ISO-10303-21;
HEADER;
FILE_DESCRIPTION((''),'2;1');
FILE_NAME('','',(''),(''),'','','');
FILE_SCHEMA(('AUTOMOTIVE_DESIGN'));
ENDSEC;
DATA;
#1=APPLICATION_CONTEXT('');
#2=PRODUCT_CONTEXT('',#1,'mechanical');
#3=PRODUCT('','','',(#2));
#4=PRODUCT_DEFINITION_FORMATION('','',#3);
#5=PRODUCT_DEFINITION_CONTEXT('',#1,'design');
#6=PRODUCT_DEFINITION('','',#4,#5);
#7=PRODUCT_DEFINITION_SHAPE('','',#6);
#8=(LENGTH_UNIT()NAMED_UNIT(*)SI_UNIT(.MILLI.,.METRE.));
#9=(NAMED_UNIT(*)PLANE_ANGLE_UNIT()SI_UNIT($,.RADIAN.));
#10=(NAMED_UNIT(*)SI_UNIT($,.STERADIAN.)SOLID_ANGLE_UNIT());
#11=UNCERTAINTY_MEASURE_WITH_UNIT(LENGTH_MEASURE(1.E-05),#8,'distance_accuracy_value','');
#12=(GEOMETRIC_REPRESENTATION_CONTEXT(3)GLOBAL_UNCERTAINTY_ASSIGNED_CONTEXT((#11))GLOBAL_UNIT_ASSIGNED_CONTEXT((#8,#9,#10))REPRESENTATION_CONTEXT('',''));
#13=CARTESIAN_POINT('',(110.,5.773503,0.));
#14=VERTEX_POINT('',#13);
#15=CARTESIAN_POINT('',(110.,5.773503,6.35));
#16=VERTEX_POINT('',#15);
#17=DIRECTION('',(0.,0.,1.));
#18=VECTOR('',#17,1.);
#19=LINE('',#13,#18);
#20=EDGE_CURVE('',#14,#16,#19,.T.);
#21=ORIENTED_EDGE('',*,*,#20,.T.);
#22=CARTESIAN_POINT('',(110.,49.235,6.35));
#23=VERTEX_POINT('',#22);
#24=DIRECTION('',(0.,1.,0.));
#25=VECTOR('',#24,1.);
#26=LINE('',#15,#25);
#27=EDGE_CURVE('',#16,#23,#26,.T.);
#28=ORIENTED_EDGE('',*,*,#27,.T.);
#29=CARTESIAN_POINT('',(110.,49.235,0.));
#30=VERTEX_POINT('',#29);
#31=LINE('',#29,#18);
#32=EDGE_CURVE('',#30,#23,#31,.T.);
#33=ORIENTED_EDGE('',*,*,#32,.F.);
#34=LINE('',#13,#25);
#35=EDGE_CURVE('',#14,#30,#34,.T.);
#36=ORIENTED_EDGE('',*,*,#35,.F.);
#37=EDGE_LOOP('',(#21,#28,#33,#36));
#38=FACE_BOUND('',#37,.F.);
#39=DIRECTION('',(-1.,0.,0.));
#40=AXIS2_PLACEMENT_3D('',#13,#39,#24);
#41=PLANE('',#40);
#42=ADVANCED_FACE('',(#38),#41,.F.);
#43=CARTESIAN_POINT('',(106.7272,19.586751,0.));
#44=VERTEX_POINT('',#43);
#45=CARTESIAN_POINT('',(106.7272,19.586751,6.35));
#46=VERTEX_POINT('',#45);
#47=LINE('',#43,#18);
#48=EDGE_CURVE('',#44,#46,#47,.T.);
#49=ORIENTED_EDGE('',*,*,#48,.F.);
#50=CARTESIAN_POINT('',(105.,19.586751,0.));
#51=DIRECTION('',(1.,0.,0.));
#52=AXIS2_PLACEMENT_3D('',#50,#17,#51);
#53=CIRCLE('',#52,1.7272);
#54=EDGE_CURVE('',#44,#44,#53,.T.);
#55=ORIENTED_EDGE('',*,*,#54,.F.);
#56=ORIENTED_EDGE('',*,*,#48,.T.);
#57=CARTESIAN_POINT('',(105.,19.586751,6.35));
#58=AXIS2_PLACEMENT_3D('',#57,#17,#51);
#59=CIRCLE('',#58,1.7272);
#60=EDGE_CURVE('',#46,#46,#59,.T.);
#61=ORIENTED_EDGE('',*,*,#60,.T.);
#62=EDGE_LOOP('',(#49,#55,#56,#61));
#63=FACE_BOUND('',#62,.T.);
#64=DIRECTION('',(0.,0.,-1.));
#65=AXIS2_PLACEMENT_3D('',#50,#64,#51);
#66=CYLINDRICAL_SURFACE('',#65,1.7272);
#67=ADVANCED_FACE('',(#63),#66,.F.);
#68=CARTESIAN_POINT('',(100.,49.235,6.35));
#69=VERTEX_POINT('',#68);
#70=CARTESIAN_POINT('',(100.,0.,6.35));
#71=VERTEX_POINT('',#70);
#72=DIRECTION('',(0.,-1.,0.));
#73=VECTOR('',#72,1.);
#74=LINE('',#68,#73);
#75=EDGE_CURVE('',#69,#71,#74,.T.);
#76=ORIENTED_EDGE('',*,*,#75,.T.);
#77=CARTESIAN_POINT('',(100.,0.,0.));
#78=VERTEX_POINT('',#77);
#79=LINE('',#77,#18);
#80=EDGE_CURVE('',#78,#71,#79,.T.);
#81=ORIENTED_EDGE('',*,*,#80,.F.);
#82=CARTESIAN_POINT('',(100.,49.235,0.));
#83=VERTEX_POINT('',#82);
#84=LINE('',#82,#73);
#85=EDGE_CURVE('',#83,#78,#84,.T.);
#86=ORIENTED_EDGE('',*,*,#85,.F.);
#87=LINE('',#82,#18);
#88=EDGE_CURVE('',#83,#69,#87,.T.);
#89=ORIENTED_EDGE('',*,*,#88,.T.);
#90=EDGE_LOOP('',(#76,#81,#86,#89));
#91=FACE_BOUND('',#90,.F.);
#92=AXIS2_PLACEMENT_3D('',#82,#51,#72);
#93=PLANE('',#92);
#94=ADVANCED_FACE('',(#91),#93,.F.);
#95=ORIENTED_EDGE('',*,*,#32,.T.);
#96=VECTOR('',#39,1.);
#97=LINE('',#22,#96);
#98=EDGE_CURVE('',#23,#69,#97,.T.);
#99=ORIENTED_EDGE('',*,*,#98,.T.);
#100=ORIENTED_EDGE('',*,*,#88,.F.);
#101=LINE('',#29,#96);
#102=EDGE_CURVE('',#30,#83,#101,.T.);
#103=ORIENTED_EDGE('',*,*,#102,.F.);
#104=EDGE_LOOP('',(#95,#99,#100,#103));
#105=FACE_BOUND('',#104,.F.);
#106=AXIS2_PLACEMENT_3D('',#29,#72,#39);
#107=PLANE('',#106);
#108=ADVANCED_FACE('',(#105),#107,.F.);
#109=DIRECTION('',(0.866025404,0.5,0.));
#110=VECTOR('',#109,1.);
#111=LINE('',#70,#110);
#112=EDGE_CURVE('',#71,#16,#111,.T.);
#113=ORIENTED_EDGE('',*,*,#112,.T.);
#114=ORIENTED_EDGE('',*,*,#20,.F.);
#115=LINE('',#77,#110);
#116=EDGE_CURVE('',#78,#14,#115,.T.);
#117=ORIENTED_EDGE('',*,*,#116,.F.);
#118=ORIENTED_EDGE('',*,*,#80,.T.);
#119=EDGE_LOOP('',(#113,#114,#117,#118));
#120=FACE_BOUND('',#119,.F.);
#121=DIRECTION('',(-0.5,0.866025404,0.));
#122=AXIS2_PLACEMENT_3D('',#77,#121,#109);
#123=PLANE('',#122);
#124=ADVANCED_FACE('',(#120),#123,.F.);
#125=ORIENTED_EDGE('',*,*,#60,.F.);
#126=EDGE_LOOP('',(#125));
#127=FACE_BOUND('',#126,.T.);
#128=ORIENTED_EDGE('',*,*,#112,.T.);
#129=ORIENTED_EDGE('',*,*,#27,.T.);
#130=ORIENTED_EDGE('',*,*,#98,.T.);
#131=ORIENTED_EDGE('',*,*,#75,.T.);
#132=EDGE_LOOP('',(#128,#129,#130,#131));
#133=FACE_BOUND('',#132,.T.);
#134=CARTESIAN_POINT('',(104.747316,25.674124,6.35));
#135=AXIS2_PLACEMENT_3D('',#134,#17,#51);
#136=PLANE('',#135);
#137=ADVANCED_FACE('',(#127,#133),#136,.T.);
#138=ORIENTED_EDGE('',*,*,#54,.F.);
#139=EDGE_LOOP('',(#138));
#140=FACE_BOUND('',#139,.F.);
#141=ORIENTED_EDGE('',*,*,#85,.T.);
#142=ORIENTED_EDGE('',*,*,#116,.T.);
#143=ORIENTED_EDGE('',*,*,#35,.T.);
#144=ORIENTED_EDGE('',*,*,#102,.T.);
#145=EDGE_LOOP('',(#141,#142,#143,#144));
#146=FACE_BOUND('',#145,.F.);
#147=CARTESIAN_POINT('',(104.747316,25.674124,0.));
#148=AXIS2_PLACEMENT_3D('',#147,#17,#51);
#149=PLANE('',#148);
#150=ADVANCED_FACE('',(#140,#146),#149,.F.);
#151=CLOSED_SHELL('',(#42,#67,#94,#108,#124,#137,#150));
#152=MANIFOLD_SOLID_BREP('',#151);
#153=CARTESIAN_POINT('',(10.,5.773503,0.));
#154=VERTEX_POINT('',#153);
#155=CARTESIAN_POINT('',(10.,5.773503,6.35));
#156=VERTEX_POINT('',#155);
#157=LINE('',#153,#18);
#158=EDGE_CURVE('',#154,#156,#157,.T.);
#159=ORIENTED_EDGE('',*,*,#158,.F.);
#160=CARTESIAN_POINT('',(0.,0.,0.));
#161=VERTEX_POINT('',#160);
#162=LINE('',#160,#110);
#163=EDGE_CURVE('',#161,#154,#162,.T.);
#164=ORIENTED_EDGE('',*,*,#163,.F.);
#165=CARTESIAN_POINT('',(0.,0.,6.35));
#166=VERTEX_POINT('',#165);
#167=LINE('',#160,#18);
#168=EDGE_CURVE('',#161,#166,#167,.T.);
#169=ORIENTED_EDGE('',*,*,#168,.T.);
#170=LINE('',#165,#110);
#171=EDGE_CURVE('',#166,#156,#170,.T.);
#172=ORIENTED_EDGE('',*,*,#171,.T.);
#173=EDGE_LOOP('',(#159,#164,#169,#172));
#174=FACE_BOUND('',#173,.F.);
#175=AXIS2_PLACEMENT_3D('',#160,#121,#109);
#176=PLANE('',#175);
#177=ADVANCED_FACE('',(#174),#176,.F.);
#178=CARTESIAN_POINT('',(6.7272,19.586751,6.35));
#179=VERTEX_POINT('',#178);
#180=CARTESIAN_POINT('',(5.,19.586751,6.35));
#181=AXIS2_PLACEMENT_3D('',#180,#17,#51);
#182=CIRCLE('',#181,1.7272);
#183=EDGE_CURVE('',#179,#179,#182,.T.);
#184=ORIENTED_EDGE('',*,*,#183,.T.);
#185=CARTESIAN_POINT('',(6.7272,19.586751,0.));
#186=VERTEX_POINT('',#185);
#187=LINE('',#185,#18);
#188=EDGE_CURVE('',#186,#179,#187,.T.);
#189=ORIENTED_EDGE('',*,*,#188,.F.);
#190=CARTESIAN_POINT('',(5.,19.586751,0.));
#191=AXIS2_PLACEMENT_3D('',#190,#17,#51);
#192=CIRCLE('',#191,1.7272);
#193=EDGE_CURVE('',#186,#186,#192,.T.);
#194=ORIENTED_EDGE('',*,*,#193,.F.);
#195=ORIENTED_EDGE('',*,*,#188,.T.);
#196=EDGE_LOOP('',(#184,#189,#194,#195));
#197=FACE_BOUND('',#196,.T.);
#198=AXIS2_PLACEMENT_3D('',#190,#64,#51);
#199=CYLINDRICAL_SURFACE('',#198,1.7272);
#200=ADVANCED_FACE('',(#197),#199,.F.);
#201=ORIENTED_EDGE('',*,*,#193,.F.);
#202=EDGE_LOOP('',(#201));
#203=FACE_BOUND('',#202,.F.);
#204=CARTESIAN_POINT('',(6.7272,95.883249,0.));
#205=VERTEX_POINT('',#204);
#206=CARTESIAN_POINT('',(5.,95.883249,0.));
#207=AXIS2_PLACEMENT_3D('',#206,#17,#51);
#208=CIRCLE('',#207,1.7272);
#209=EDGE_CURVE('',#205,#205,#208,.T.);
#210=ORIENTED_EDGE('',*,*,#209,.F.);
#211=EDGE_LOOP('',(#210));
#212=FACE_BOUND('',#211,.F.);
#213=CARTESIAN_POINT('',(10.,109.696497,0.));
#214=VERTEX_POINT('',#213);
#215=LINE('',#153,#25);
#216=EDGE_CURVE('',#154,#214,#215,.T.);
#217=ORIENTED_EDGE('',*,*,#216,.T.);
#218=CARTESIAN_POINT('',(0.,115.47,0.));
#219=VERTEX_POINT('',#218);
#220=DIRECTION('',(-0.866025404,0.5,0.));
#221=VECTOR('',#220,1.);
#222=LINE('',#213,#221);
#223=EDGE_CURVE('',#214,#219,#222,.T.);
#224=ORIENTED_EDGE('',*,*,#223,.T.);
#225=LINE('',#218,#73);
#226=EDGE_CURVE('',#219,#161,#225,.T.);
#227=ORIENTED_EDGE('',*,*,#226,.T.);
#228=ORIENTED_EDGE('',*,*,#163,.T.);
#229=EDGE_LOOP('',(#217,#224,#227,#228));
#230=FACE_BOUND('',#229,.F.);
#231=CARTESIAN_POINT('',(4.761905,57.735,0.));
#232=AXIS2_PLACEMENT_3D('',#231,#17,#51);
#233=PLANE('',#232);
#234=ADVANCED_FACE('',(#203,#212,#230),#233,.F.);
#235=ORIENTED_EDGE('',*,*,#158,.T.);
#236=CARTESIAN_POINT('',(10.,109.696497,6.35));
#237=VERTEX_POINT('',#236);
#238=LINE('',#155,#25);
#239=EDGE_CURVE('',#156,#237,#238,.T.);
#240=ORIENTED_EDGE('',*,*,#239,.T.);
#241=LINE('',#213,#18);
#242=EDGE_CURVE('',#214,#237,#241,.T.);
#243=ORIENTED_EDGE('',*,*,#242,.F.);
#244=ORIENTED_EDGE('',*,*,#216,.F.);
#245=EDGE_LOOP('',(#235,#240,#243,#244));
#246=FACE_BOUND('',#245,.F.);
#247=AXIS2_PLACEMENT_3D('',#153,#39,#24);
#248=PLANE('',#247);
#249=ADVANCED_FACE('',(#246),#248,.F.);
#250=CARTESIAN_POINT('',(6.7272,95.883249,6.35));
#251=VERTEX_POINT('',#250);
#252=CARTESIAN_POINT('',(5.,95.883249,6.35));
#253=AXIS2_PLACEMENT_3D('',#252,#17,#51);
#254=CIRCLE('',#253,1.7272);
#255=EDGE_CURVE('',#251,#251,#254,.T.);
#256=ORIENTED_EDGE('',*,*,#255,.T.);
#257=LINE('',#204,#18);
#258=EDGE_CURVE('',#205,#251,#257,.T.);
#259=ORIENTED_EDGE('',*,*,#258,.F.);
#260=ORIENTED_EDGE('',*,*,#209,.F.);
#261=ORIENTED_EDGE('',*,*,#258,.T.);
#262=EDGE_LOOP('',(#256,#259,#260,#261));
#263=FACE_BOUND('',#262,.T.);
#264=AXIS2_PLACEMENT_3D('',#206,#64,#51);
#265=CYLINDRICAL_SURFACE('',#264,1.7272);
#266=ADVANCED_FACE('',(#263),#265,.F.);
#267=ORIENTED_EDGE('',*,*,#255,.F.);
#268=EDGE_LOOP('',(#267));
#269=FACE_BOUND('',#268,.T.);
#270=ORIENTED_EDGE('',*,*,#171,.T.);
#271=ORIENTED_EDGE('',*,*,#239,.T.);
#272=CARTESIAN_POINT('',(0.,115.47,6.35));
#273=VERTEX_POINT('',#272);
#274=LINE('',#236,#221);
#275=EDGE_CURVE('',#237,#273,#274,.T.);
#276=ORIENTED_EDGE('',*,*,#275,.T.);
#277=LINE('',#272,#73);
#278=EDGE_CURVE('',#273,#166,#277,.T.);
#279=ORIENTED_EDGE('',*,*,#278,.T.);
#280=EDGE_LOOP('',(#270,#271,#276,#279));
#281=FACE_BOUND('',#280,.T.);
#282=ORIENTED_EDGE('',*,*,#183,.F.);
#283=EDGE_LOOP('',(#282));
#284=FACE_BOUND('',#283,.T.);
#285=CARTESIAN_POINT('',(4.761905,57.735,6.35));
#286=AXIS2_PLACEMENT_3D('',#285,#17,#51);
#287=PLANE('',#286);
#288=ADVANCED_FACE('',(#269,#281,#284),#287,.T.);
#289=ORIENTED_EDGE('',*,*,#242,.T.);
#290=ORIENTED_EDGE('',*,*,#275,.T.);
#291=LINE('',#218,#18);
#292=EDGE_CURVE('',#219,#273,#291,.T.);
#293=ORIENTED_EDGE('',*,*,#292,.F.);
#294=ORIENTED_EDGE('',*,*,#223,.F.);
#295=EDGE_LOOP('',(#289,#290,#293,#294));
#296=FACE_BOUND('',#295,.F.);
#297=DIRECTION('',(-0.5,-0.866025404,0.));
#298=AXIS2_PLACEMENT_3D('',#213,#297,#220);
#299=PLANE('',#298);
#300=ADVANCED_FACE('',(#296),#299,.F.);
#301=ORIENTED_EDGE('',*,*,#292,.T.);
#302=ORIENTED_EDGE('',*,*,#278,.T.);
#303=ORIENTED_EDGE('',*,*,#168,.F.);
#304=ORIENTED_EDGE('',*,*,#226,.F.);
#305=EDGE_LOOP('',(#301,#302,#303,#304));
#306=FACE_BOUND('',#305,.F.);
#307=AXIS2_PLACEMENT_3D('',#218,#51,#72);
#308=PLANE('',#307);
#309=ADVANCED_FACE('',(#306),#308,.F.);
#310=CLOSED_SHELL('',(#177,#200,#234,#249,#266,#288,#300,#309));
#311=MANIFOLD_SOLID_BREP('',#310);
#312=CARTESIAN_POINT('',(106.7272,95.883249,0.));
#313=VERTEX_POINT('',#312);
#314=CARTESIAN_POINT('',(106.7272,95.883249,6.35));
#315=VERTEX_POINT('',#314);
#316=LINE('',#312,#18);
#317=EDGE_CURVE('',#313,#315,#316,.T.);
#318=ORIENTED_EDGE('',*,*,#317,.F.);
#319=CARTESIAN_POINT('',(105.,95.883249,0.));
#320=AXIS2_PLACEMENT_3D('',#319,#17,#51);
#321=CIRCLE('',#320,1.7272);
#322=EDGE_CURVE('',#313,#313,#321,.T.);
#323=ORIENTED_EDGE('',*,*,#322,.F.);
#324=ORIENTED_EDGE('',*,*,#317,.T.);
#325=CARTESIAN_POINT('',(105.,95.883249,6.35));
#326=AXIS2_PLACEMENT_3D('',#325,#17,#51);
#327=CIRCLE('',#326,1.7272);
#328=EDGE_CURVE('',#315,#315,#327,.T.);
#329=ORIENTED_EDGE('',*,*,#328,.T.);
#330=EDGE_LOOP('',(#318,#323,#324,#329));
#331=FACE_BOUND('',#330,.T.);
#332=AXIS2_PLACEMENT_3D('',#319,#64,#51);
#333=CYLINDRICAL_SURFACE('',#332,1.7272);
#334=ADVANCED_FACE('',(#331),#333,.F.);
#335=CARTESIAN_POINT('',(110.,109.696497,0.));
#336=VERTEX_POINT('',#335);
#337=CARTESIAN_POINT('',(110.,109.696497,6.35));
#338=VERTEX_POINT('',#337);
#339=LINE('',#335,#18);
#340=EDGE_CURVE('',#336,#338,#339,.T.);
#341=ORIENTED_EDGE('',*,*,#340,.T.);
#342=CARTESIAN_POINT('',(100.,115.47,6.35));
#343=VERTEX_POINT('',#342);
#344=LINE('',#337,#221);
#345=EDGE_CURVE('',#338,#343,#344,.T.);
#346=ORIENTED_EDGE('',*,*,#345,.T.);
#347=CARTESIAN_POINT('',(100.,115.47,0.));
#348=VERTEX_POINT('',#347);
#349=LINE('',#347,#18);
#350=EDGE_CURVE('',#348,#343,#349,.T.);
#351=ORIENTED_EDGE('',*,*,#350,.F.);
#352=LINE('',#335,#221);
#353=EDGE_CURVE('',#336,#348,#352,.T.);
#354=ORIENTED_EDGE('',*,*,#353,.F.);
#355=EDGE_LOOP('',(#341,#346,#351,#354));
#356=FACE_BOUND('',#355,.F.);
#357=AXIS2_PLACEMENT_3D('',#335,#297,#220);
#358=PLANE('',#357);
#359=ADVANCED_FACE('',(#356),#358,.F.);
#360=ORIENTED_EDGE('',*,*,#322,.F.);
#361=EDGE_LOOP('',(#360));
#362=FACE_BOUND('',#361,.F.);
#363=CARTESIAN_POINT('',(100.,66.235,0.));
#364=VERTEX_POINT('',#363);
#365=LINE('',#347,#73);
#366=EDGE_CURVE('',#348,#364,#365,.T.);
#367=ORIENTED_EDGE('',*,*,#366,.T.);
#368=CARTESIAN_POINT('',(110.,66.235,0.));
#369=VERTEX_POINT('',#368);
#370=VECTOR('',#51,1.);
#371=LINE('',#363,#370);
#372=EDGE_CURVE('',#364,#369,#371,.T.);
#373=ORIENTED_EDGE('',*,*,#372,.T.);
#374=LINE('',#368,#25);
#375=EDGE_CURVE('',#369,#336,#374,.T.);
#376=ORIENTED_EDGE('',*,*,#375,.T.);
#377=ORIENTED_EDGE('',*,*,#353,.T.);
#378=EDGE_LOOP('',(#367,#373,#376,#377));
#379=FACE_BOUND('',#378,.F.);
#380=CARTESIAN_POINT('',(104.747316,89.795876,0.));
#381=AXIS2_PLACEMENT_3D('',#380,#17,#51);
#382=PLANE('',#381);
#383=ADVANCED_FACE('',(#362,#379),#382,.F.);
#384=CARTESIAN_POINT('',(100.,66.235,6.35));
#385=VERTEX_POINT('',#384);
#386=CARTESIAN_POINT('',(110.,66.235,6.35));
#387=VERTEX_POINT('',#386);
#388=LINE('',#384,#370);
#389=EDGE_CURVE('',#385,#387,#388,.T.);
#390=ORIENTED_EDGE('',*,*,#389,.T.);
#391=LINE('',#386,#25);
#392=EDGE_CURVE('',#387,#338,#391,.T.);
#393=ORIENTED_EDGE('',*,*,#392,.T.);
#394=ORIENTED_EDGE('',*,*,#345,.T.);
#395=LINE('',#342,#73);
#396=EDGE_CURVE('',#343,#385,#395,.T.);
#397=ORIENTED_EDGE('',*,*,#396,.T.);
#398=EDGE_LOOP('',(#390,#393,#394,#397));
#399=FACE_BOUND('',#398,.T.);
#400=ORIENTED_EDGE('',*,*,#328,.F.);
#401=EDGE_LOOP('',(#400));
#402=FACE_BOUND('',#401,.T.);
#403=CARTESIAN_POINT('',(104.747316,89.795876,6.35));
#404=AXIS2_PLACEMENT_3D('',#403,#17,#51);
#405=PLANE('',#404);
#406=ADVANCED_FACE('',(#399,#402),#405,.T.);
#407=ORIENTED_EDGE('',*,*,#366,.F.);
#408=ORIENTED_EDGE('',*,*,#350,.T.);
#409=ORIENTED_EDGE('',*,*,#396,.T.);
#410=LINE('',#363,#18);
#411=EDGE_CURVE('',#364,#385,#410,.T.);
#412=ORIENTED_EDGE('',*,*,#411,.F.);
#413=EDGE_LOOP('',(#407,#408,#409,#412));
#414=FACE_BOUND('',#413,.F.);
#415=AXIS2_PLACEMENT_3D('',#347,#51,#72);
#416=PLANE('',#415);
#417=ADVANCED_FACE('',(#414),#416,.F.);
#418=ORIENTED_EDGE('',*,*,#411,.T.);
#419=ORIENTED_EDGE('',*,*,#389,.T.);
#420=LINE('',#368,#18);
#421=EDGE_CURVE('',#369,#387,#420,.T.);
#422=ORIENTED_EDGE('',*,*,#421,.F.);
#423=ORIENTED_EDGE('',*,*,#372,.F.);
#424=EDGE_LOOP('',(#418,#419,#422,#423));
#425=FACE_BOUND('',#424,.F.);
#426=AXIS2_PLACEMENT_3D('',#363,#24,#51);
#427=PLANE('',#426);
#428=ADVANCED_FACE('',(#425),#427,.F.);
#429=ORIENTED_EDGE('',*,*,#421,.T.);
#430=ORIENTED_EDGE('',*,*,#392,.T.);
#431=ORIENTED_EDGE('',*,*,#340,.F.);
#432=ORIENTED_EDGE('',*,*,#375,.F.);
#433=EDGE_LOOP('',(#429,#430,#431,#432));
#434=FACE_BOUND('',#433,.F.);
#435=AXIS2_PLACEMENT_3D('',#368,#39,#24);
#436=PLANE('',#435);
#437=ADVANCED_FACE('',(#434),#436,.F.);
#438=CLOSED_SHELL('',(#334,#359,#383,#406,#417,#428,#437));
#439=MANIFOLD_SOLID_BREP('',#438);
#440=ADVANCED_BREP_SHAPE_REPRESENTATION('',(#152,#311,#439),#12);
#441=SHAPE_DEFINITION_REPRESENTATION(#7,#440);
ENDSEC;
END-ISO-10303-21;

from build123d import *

# Parameters (mm, degrees)
F0_R     = 1.7272
F1_DEPTH = 6.35


# Not quite as in the source:
# - a length typed as a fraction of an inch, garbled in the dataset ("3 / 203.2 mm" for 3/8 in), is restored


with BuildPart() as f1:
    # F0 (on Top) → F1 (new body)
    with BuildSketch(Plane.XY):
        Polygon((0, 115.47), (0, 0), (10, 5.7735026919), (10, 109.6964973081), align=None)
        with Locations((5, 19.5867513459)):
            Circle(F0_R, mode=Mode.SUBTRACT)
        with Locations((5, 95.8832486541)):
            Circle(F0_R, mode=Mode.SUBTRACT)
    extrude(amount=F1_DEPTH)


with BuildPart() as f1b:
    # F0 (on Top) → F1, piece 2 (new body)
    with BuildSketch(Plane.XY):
        Polygon((100, 49.235), (100, 0), (110, 5.7735026919), (110, 49.235), align=None)
        with Locations((105, 19.5867513459)):
            Circle(F0_R, mode=Mode.SUBTRACT)
    extrude(amount=F1_DEPTH)


with BuildPart() as f1c:
    # F0 (on Top) → F1, piece 3 (new body)
    with BuildSketch(Plane.XY):
        Polygon((110, 109.6964973081), (100, 115.47), (100, 66.235), (110, 66.235), align=None)
        with Locations((105, 95.8832486541)):
            Circle(F0_R, mode=Mode.SUBTRACT)
    extrude(amount=F1_DEPTH)


solid = Compound([f1.part, f1b.part, f1c.part])
